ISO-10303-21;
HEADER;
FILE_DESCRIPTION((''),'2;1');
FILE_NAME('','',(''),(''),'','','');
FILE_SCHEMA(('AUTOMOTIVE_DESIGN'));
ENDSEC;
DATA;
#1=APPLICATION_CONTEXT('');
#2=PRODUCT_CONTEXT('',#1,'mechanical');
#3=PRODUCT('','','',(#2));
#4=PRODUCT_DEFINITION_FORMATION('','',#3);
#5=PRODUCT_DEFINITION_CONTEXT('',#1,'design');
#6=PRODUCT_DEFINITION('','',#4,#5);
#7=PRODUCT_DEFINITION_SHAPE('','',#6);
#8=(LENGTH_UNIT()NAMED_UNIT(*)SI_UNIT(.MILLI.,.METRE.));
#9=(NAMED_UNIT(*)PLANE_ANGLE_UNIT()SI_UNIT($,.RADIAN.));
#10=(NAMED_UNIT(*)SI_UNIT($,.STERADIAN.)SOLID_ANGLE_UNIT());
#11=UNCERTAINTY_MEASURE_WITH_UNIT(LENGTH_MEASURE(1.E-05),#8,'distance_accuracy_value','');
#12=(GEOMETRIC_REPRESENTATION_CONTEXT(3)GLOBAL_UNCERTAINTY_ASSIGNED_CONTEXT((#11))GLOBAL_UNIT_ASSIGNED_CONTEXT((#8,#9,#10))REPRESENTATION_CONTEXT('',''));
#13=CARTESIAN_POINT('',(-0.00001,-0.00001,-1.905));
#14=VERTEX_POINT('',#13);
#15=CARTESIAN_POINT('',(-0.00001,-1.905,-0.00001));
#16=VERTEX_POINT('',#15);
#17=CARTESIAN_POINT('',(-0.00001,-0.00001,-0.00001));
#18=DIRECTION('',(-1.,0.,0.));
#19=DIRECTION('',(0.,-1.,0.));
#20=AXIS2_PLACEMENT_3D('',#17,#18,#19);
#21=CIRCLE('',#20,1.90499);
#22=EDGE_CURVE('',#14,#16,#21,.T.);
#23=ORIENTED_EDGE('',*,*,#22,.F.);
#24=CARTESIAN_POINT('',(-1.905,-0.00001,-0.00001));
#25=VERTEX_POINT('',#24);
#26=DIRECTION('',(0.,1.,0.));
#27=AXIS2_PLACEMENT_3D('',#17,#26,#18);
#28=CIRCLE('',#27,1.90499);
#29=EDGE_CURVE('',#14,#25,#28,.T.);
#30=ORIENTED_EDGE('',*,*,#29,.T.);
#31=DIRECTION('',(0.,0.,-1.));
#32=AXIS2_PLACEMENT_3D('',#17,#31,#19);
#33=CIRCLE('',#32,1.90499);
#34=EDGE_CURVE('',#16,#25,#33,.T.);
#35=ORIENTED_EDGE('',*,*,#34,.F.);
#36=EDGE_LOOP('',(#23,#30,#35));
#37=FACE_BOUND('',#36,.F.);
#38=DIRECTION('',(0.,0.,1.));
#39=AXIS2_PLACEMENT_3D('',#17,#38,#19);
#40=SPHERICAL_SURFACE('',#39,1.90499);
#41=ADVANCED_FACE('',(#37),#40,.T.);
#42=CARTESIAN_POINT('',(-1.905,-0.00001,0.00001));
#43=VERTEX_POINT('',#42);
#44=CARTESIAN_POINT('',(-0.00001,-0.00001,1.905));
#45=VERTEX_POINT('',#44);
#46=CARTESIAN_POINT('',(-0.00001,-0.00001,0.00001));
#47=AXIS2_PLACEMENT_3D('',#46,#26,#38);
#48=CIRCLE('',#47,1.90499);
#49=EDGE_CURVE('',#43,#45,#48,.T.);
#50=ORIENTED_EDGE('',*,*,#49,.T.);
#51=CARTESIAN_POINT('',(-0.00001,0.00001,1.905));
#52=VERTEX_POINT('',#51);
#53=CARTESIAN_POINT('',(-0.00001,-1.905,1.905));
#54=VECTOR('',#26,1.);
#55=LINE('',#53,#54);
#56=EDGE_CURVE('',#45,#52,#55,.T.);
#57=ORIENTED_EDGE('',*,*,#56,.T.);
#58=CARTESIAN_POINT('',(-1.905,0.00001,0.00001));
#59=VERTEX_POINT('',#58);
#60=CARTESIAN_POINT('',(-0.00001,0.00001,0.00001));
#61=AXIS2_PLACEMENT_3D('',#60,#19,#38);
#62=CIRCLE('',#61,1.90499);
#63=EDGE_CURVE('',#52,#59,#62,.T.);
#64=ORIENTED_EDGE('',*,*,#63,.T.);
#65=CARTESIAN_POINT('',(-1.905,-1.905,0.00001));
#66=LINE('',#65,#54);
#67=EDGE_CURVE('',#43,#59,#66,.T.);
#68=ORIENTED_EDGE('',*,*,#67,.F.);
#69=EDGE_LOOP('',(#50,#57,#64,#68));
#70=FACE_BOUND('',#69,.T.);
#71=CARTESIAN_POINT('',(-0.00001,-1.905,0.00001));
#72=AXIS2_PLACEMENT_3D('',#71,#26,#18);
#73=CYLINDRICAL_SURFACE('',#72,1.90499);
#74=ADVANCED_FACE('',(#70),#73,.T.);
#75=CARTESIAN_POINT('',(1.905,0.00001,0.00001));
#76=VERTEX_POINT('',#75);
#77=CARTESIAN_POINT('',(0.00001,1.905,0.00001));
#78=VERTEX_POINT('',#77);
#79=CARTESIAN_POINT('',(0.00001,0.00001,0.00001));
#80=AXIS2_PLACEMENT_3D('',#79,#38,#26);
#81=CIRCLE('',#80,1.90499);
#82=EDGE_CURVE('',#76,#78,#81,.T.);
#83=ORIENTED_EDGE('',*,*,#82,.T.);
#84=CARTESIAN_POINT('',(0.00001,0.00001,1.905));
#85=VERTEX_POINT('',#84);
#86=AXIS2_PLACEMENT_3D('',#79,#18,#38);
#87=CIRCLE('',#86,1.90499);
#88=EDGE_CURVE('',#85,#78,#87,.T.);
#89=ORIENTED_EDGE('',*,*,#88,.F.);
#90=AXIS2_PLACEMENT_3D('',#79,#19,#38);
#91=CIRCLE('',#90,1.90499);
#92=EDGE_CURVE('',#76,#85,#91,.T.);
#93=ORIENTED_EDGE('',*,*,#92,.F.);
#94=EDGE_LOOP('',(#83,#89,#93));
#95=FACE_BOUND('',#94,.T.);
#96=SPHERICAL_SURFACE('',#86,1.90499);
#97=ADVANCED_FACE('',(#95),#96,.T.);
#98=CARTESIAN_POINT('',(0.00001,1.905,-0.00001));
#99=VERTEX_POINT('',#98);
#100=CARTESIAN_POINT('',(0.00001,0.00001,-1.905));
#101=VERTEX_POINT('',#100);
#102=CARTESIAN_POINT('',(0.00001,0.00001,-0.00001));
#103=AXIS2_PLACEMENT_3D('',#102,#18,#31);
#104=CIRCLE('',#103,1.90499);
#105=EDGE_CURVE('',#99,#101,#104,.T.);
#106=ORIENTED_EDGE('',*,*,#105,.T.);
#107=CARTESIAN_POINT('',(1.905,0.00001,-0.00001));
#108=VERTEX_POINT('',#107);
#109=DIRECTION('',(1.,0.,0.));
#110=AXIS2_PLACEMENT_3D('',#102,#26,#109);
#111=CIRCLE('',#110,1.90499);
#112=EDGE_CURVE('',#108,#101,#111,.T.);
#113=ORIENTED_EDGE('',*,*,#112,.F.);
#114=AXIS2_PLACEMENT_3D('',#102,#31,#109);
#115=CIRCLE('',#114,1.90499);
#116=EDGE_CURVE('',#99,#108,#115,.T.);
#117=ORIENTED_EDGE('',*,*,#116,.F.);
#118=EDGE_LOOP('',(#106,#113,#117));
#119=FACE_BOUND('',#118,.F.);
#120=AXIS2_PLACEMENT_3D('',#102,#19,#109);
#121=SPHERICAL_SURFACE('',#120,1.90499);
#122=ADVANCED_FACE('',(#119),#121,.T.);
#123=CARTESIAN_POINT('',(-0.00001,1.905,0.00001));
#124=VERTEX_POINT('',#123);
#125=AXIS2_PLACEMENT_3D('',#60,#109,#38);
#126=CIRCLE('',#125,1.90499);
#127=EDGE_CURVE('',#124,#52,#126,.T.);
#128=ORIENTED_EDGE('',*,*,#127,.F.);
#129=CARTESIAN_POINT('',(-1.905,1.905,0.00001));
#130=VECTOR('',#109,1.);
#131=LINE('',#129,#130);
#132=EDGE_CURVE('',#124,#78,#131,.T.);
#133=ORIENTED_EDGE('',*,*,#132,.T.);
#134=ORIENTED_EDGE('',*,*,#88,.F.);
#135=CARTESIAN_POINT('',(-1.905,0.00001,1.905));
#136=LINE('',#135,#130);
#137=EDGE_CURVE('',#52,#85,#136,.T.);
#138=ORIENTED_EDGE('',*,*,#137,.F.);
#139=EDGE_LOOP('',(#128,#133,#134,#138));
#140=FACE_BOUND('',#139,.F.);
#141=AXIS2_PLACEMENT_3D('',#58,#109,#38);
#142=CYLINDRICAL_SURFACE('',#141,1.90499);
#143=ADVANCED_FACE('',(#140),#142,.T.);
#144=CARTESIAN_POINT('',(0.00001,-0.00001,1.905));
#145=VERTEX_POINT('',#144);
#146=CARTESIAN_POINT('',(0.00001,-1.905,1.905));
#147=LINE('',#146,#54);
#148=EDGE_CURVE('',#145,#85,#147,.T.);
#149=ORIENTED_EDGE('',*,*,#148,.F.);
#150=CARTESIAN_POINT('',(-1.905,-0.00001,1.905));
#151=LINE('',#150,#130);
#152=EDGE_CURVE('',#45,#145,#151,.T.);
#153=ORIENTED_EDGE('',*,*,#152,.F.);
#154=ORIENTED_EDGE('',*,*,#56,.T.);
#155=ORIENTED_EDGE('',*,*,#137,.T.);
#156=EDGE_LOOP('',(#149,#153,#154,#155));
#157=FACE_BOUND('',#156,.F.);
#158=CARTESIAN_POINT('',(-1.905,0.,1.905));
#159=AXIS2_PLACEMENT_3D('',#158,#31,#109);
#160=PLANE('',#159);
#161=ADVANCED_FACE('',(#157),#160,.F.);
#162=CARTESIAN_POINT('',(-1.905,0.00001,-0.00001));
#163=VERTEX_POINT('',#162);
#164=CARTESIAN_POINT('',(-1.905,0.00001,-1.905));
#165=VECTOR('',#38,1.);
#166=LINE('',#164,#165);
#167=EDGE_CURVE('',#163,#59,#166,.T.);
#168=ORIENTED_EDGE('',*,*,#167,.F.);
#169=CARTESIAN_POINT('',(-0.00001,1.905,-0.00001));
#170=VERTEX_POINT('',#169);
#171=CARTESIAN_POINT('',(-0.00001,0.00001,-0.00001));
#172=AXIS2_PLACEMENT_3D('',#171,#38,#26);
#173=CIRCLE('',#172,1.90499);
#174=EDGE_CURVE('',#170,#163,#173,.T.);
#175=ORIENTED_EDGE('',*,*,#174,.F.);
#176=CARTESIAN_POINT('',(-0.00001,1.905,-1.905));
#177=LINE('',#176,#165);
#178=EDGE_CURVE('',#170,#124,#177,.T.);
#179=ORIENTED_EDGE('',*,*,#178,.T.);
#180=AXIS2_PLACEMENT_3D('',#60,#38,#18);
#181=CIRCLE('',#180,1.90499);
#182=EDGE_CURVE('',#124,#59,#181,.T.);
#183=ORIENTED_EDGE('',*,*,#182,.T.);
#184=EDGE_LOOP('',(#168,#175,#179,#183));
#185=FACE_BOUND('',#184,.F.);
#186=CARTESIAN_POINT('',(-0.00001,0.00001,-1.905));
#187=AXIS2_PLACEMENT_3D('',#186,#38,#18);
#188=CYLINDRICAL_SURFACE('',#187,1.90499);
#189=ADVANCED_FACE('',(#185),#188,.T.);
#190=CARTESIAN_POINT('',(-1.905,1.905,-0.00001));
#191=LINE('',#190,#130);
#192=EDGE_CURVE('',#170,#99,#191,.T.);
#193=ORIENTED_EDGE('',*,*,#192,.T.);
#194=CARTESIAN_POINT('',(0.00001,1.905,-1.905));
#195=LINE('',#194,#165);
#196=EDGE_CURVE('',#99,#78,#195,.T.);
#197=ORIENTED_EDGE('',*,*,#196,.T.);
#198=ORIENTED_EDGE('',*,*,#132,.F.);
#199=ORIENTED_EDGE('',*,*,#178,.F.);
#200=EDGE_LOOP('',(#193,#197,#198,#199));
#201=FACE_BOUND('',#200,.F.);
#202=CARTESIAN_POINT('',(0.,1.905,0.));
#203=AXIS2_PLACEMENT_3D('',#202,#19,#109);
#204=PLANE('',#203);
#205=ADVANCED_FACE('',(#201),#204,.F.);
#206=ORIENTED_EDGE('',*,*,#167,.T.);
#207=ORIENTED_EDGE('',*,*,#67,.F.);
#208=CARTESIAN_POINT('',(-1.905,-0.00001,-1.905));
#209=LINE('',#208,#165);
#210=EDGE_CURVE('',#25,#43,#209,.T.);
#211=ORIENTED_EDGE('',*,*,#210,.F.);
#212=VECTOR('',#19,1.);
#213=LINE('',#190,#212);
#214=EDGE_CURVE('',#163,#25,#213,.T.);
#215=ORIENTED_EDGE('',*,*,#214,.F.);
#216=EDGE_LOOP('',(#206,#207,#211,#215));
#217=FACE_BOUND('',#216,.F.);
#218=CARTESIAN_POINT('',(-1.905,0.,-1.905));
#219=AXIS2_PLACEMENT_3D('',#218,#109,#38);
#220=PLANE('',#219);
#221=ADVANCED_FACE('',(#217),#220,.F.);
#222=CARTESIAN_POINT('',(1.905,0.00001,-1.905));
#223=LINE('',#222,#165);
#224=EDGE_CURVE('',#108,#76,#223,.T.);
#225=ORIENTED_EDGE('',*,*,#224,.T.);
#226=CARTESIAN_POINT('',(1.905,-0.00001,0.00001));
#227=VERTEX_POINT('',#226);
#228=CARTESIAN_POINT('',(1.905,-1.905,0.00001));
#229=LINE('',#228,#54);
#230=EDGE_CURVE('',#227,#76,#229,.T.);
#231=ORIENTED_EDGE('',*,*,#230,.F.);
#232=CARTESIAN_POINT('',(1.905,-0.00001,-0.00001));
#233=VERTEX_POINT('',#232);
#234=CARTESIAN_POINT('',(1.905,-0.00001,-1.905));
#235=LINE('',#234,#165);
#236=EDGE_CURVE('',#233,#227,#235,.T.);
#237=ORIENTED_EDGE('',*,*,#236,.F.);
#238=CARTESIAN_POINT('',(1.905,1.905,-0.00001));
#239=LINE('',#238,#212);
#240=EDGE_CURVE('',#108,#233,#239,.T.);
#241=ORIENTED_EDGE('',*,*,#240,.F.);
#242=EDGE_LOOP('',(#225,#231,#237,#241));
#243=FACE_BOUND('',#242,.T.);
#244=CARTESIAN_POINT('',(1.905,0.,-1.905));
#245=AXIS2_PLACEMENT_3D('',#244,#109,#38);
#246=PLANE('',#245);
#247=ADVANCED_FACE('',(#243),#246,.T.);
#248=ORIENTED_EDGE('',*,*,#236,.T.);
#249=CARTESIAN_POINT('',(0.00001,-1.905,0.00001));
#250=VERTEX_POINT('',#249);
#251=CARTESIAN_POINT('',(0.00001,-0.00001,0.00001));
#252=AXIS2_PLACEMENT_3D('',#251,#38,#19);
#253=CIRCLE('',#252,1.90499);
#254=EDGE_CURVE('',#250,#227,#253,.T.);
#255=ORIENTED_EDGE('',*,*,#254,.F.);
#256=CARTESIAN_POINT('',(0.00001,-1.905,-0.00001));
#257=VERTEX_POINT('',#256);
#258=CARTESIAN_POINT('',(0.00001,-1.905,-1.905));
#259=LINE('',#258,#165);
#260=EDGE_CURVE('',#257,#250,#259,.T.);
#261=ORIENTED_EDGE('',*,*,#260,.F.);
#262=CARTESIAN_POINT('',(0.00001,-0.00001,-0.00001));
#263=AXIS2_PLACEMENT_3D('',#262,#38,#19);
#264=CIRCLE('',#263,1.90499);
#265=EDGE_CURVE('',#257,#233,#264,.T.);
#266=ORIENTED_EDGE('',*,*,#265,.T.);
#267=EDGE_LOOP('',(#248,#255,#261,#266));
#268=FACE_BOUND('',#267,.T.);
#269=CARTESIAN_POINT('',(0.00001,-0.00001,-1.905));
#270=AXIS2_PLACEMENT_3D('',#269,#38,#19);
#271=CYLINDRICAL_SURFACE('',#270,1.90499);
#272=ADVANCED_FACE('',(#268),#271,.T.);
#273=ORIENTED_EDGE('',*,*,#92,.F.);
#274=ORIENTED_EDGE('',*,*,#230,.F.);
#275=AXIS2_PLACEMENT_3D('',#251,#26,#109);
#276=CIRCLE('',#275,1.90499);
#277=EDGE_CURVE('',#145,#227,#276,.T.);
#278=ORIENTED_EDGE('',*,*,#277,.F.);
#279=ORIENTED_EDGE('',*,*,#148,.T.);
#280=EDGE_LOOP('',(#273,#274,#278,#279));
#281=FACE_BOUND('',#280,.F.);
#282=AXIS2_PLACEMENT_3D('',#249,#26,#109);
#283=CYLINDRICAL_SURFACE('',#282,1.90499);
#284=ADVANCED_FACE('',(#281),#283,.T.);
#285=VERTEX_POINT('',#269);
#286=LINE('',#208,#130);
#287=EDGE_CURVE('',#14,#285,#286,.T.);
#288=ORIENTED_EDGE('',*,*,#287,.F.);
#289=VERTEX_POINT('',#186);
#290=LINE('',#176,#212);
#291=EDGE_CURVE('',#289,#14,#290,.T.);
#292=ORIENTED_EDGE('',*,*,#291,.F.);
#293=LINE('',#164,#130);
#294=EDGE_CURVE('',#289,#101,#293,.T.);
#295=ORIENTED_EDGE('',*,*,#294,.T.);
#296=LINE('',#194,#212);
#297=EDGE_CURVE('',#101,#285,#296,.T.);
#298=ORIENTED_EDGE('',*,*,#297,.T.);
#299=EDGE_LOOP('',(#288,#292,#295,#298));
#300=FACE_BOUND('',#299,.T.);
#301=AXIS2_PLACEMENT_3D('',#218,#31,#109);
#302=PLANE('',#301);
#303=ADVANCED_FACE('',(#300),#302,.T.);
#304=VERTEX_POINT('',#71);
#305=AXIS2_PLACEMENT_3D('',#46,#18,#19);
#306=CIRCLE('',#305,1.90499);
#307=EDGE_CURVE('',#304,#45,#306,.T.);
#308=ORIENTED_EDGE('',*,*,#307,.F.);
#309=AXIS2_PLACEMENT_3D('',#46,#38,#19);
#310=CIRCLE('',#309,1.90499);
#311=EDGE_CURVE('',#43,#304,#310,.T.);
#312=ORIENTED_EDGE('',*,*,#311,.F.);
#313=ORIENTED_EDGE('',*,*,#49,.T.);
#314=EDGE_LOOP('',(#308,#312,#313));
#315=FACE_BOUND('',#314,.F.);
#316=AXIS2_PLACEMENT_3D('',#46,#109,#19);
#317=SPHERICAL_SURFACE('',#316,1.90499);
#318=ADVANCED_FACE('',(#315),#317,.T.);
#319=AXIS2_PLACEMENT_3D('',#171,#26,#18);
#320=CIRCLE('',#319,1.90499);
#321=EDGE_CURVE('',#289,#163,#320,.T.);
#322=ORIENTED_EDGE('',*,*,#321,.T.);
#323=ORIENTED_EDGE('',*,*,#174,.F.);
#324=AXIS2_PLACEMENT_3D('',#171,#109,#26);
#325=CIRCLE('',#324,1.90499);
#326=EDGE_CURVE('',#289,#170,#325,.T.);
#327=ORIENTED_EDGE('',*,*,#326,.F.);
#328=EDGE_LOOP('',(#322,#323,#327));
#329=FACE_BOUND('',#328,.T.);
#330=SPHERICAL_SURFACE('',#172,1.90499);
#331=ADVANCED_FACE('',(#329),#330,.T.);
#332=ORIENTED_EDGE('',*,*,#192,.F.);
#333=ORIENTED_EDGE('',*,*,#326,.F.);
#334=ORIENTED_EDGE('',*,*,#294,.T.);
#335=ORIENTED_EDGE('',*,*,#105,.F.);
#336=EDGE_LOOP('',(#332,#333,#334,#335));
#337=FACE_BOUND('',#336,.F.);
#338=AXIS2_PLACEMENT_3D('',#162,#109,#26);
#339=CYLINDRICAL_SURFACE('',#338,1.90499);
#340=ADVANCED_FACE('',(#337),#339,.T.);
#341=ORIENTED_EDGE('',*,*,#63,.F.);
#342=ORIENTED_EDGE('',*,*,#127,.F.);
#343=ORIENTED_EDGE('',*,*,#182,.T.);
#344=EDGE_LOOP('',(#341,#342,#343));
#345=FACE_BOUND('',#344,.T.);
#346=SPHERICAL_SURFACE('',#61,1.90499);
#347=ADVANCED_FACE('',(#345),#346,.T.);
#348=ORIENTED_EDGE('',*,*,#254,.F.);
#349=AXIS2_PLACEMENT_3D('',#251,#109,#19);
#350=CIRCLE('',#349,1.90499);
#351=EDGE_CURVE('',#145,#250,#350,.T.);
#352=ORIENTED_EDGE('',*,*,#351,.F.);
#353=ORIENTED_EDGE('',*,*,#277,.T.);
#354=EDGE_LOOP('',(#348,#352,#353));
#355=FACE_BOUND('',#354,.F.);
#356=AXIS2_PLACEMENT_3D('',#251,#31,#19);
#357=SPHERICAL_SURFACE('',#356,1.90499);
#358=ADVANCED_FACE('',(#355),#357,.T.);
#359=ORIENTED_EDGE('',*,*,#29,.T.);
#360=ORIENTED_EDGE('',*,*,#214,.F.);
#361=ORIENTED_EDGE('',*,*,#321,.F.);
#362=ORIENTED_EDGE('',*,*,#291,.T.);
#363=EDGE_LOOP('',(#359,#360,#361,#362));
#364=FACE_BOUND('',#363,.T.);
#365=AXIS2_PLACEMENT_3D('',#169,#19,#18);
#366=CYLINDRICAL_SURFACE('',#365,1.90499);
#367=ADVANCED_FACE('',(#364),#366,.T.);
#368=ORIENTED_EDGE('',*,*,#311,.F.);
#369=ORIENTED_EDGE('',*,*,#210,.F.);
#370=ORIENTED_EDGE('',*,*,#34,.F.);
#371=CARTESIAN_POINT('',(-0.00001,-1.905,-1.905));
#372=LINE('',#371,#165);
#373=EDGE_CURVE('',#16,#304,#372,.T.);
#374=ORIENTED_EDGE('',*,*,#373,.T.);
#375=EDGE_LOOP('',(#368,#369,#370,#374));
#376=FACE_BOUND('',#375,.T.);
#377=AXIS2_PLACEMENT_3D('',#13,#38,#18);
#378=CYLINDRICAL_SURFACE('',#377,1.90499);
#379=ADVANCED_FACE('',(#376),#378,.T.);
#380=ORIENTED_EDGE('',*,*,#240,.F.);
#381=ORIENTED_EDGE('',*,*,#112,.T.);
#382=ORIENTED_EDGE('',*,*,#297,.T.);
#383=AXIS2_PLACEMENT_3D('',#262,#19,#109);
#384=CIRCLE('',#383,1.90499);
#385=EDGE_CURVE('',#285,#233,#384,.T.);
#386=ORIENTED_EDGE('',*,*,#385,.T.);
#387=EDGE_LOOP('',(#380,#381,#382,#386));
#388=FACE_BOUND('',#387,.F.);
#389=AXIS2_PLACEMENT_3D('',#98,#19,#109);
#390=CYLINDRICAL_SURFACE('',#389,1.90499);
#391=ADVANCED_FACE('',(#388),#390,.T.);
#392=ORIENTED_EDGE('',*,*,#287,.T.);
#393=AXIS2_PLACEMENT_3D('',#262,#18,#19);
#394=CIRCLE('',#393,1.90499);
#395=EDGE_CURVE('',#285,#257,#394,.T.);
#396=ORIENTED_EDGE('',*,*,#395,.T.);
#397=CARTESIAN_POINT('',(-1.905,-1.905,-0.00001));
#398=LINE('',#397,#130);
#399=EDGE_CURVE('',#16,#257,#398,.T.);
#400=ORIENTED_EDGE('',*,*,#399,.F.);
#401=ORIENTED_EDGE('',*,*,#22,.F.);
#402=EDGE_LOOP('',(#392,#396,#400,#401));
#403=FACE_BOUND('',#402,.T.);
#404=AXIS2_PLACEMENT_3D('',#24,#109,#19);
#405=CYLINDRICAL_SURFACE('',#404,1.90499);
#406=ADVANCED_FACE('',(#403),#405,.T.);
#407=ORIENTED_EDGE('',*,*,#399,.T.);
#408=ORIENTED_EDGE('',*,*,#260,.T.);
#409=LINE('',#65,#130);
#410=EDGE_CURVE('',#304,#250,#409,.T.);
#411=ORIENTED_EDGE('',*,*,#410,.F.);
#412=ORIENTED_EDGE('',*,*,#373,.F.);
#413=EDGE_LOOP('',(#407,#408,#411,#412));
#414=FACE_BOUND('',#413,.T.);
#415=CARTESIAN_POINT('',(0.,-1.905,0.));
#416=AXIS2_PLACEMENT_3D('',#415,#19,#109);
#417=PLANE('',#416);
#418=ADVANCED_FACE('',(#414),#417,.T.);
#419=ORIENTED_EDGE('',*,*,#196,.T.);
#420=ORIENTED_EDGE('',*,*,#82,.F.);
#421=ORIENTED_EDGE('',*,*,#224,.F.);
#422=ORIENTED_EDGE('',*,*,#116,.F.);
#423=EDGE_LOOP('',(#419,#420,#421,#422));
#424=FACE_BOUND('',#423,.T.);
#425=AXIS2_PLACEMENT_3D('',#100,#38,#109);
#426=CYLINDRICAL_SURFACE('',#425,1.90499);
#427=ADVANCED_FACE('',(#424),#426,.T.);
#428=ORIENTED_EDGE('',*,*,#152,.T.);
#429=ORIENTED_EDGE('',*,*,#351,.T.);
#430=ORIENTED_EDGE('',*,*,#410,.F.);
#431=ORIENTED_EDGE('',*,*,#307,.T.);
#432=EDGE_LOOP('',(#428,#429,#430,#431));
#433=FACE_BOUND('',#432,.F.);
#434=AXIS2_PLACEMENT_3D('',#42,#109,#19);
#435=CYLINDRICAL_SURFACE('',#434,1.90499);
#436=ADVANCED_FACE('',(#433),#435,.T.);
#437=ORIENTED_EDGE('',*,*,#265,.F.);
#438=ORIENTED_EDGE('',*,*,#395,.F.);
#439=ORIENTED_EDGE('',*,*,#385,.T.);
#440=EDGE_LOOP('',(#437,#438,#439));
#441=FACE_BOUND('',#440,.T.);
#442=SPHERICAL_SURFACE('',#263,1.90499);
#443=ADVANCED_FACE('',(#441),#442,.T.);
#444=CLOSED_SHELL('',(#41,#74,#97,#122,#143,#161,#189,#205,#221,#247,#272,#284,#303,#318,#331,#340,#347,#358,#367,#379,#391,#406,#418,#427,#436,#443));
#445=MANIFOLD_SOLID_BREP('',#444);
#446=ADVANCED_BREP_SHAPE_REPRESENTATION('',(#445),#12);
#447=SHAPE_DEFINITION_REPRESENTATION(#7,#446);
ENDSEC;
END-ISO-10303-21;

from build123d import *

# Parameters (mm, degrees)
F0_W          = 3.81
F0_H          = 3.81
F1_DEPTH      = 1.905
F1_DEPTH_BACK = 1.905
F2_R          = 1.90499


# Not quite as in the source:
# - a fillet or chamfer is up to 0.001 mm smaller than in the source, because OpenCascade refuses the exact size


with BuildPart() as f1:
    # F0 (on Front) → F1 (new body, two sides)
    with BuildSketch(Plane.XZ) as f1_sk:
        Rectangle(F0_W, F0_H)
    extrude(amount=F1_DEPTH)
    extrude(f1_sk.sketch, amount=-F1_DEPTH_BACK)

    # F2 (radius 1.905 in the source; OpenCascade refuses exactly that, so slightly less here)
    f2_edges = [f1.edges().sort_by_distance(p)[0] for p in [
        (1.905, -1.905, 0),
        (0, -1.905, 1.905),
        (-1.905, -1.905, 0),
        (0, -1.905, -1.905),
        (-1.905, 0, 1.905),
        (0, 1.905, 1.905),
        (1.905, 0, 1.905),
        (1.905, 0, -1.905),
        (1.905, 1.905, 0),
        (-1.905, 1.905, 0),
        (0, 1.905, -1.905),
        (-1.905, 0, -1.905),
    ]]
    fillet(f2_edges, radius=F2_R)


solid = f1.part
